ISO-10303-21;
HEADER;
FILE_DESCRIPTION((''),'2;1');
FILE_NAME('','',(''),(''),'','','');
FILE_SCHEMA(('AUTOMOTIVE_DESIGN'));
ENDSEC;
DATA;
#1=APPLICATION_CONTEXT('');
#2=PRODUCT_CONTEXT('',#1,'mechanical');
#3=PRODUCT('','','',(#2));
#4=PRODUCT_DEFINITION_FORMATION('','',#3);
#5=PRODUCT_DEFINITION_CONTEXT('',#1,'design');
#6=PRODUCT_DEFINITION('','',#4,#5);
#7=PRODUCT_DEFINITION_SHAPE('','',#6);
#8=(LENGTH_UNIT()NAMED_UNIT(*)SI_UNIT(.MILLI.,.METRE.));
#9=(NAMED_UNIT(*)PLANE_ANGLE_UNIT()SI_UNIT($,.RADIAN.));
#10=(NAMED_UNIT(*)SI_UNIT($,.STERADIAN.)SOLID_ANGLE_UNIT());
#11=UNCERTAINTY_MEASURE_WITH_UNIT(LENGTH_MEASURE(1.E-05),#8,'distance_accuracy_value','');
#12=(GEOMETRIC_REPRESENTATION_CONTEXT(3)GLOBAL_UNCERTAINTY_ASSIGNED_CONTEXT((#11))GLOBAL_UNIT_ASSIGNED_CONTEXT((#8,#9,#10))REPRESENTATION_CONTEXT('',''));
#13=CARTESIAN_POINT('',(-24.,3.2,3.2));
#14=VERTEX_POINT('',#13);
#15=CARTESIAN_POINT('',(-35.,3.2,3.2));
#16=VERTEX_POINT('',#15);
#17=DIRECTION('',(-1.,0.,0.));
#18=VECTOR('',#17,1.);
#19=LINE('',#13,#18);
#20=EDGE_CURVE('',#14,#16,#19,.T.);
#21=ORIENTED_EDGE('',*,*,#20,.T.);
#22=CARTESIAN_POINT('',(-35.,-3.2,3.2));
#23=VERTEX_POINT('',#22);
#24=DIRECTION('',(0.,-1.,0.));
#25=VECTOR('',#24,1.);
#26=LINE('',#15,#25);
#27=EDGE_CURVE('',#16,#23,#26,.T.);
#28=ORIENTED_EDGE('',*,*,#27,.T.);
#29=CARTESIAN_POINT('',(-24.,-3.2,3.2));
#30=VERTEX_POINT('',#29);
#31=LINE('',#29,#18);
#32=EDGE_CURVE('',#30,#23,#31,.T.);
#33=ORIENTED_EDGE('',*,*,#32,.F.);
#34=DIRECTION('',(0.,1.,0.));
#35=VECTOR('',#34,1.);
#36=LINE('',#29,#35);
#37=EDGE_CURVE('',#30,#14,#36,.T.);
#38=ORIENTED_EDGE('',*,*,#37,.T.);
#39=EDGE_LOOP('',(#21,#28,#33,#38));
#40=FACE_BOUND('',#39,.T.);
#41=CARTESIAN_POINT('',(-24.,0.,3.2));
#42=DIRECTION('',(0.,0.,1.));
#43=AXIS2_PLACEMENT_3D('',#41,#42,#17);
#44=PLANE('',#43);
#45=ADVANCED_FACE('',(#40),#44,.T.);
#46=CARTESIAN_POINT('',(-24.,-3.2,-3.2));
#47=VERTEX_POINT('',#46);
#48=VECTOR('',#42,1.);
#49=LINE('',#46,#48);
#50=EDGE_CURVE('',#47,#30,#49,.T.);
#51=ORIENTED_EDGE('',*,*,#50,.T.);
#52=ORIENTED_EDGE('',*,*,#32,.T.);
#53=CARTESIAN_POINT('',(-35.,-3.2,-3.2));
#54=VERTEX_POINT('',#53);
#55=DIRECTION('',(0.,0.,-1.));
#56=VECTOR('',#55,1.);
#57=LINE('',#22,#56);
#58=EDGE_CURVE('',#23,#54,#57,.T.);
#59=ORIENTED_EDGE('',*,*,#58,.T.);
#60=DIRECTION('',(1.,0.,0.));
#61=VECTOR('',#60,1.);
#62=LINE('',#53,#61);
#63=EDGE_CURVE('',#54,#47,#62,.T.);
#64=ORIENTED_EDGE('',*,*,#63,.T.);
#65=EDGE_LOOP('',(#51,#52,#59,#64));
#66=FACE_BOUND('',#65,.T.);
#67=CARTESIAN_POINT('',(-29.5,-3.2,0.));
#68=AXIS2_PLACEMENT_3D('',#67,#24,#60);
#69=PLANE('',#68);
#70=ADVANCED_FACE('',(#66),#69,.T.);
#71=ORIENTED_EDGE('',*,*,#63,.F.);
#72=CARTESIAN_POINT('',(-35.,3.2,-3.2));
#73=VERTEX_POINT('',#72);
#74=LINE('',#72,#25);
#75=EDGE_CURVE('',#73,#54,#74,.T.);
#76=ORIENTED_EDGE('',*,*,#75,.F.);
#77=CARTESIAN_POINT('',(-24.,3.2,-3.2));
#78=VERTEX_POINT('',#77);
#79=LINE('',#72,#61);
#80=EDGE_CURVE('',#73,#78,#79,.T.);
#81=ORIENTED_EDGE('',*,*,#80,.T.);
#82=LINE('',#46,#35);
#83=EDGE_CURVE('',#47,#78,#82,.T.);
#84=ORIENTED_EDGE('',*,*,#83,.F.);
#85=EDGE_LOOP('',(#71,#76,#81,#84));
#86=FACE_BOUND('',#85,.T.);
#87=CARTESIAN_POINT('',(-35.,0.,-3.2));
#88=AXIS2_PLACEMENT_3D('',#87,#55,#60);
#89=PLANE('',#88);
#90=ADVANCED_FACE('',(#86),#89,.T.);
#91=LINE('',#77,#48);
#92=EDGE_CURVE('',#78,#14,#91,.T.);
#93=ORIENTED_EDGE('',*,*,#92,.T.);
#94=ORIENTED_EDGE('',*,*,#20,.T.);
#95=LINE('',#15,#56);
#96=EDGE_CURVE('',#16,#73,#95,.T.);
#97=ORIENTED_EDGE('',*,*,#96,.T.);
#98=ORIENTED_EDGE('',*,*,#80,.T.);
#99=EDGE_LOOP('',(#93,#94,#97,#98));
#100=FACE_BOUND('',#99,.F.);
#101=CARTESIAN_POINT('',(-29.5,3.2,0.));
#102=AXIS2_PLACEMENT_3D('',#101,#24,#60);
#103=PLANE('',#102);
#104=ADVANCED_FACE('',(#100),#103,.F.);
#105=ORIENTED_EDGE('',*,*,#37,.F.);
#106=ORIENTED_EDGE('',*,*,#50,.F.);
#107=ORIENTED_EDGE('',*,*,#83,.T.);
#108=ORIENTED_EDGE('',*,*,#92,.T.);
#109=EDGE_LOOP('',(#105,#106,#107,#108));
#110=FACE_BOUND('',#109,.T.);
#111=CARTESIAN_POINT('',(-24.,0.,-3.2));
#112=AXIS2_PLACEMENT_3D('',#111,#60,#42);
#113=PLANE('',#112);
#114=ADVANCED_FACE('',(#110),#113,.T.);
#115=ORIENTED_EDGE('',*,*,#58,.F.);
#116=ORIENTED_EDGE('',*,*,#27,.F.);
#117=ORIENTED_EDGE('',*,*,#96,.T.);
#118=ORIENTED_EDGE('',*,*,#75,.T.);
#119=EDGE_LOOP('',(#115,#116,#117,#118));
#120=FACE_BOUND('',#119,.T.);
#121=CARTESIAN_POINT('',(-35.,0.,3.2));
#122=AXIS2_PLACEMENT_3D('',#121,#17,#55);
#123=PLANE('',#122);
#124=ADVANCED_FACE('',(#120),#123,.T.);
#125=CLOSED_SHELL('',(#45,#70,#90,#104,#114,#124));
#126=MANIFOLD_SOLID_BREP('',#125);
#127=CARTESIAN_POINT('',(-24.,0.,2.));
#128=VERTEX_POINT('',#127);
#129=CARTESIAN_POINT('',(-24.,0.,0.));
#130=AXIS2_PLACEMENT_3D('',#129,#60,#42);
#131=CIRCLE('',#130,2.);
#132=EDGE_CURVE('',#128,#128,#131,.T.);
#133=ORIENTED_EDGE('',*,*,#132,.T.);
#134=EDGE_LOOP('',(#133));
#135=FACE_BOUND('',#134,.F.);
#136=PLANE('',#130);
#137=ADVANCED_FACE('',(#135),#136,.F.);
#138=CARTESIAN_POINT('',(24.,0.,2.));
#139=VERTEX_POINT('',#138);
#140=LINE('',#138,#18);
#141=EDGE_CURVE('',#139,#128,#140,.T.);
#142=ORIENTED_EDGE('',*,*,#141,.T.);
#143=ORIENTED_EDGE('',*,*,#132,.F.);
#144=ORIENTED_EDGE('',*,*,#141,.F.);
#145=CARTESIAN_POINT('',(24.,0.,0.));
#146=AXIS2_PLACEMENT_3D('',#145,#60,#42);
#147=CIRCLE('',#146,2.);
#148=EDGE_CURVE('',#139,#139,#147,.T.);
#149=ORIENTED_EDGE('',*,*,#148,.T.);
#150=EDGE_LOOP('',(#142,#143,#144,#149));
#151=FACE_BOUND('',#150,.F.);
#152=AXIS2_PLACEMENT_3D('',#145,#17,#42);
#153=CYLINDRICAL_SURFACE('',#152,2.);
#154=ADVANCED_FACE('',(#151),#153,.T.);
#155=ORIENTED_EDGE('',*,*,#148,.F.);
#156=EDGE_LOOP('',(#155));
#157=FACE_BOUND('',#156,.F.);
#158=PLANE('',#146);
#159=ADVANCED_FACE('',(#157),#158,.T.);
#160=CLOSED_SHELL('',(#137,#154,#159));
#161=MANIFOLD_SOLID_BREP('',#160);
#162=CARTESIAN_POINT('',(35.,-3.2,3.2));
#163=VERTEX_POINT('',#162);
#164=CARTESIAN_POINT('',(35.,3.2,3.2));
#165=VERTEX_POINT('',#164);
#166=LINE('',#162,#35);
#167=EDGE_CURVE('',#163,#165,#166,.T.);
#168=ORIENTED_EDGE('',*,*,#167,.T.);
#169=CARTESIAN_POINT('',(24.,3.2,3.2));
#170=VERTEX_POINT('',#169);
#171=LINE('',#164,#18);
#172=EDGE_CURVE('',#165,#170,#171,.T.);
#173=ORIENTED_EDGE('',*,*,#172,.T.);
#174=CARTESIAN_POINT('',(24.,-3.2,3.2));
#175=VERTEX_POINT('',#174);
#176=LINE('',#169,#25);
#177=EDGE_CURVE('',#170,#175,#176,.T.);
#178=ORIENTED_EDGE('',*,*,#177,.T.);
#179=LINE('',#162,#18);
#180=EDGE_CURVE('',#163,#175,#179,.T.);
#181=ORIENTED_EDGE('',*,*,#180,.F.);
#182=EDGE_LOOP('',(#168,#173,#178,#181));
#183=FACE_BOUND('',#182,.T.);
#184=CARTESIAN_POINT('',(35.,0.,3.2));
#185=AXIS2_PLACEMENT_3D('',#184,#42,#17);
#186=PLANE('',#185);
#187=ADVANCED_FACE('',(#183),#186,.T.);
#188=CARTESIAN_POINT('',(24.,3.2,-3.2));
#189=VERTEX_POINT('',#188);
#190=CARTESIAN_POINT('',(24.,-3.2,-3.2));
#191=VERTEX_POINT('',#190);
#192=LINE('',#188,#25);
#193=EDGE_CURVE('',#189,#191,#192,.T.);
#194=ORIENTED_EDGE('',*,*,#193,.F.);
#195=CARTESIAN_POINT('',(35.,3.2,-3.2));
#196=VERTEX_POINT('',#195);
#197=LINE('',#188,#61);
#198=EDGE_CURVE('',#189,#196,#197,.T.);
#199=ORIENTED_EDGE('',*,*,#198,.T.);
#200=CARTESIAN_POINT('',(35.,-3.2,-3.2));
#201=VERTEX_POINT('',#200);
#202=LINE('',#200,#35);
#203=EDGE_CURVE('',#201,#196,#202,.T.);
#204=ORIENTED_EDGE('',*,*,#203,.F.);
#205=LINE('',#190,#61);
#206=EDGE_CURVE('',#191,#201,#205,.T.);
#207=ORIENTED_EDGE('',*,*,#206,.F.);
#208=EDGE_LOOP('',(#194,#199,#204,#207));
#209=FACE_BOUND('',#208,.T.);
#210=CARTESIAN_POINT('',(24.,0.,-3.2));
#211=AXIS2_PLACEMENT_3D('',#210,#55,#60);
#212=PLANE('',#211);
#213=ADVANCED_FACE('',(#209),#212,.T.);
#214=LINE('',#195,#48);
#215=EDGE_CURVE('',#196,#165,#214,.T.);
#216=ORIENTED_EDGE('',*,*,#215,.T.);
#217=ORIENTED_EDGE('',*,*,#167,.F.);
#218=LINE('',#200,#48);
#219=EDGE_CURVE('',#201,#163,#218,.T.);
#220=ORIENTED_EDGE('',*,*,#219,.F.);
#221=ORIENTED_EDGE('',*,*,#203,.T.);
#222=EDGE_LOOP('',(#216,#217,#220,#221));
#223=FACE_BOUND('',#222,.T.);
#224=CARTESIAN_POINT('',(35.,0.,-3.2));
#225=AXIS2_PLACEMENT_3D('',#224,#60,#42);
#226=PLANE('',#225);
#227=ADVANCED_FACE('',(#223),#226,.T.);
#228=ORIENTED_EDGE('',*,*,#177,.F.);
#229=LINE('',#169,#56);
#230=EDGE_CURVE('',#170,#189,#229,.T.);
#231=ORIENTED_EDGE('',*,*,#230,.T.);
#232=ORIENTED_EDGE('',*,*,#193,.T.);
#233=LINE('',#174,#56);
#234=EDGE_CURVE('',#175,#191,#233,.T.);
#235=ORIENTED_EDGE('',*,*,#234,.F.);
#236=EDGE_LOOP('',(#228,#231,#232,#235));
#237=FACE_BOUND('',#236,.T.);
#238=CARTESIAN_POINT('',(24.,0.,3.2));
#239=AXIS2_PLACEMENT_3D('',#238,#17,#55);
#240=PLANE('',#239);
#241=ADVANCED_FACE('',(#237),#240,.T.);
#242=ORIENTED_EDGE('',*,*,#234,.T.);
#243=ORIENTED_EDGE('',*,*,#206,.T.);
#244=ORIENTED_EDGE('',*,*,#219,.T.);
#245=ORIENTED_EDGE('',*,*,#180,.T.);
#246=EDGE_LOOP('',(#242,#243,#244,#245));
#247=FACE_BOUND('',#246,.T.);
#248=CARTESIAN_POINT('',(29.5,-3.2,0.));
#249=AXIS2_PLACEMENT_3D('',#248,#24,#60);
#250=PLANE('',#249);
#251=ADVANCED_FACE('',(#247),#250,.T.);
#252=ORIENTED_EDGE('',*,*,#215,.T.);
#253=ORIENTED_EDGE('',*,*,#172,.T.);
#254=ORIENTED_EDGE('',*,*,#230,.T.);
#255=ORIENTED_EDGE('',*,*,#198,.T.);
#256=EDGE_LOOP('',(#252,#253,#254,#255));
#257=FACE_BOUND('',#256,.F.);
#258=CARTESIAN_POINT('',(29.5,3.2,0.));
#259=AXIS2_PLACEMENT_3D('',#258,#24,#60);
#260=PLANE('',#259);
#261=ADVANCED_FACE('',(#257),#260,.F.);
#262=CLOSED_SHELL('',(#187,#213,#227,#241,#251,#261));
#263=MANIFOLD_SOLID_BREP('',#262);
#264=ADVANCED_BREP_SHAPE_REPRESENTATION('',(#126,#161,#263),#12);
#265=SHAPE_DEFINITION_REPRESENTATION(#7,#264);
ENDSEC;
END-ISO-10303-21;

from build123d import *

# Parameters (mm, degrees)
F2_DEPTH = 3.2
F3_DEPTH = 3.2


with BuildPart() as f1:
    # F0 (on Front) → F1 (revolve)
    with BuildSketch(Plane.XZ):
        Polygon((24, 2), (-24, 2), (-24, 0), (0, 0), (24, 0), align=None)
    revolve(axis=Axis((-12, 0, 0), (1, 0, 0)))


with BuildPart() as f2:
    # F0 (on Front) → F2 (new body, symmetric)
    with BuildSketch(Plane.XZ):
        Polygon((-24, 3.2), (-35, 3.2), (-35, -3.2), (-24, -3.2), (-24, 0), (-24, 2), align=None)
    extrude(amount=F2_DEPTH, both=True)


with BuildPart() as f3:
    # F0 (on Front) → F3 (new body, symmetric)
    with BuildSketch(Plane.XZ):
        Polygon((35, 3.2), (24, 3.2), (24, 2), (24, 0), (24, -3.2), (35, -3.2), align=None)
    extrude(amount=F3_DEPTH, both=True)


solid = Compound([f1.part, f2.part, f3.part])
